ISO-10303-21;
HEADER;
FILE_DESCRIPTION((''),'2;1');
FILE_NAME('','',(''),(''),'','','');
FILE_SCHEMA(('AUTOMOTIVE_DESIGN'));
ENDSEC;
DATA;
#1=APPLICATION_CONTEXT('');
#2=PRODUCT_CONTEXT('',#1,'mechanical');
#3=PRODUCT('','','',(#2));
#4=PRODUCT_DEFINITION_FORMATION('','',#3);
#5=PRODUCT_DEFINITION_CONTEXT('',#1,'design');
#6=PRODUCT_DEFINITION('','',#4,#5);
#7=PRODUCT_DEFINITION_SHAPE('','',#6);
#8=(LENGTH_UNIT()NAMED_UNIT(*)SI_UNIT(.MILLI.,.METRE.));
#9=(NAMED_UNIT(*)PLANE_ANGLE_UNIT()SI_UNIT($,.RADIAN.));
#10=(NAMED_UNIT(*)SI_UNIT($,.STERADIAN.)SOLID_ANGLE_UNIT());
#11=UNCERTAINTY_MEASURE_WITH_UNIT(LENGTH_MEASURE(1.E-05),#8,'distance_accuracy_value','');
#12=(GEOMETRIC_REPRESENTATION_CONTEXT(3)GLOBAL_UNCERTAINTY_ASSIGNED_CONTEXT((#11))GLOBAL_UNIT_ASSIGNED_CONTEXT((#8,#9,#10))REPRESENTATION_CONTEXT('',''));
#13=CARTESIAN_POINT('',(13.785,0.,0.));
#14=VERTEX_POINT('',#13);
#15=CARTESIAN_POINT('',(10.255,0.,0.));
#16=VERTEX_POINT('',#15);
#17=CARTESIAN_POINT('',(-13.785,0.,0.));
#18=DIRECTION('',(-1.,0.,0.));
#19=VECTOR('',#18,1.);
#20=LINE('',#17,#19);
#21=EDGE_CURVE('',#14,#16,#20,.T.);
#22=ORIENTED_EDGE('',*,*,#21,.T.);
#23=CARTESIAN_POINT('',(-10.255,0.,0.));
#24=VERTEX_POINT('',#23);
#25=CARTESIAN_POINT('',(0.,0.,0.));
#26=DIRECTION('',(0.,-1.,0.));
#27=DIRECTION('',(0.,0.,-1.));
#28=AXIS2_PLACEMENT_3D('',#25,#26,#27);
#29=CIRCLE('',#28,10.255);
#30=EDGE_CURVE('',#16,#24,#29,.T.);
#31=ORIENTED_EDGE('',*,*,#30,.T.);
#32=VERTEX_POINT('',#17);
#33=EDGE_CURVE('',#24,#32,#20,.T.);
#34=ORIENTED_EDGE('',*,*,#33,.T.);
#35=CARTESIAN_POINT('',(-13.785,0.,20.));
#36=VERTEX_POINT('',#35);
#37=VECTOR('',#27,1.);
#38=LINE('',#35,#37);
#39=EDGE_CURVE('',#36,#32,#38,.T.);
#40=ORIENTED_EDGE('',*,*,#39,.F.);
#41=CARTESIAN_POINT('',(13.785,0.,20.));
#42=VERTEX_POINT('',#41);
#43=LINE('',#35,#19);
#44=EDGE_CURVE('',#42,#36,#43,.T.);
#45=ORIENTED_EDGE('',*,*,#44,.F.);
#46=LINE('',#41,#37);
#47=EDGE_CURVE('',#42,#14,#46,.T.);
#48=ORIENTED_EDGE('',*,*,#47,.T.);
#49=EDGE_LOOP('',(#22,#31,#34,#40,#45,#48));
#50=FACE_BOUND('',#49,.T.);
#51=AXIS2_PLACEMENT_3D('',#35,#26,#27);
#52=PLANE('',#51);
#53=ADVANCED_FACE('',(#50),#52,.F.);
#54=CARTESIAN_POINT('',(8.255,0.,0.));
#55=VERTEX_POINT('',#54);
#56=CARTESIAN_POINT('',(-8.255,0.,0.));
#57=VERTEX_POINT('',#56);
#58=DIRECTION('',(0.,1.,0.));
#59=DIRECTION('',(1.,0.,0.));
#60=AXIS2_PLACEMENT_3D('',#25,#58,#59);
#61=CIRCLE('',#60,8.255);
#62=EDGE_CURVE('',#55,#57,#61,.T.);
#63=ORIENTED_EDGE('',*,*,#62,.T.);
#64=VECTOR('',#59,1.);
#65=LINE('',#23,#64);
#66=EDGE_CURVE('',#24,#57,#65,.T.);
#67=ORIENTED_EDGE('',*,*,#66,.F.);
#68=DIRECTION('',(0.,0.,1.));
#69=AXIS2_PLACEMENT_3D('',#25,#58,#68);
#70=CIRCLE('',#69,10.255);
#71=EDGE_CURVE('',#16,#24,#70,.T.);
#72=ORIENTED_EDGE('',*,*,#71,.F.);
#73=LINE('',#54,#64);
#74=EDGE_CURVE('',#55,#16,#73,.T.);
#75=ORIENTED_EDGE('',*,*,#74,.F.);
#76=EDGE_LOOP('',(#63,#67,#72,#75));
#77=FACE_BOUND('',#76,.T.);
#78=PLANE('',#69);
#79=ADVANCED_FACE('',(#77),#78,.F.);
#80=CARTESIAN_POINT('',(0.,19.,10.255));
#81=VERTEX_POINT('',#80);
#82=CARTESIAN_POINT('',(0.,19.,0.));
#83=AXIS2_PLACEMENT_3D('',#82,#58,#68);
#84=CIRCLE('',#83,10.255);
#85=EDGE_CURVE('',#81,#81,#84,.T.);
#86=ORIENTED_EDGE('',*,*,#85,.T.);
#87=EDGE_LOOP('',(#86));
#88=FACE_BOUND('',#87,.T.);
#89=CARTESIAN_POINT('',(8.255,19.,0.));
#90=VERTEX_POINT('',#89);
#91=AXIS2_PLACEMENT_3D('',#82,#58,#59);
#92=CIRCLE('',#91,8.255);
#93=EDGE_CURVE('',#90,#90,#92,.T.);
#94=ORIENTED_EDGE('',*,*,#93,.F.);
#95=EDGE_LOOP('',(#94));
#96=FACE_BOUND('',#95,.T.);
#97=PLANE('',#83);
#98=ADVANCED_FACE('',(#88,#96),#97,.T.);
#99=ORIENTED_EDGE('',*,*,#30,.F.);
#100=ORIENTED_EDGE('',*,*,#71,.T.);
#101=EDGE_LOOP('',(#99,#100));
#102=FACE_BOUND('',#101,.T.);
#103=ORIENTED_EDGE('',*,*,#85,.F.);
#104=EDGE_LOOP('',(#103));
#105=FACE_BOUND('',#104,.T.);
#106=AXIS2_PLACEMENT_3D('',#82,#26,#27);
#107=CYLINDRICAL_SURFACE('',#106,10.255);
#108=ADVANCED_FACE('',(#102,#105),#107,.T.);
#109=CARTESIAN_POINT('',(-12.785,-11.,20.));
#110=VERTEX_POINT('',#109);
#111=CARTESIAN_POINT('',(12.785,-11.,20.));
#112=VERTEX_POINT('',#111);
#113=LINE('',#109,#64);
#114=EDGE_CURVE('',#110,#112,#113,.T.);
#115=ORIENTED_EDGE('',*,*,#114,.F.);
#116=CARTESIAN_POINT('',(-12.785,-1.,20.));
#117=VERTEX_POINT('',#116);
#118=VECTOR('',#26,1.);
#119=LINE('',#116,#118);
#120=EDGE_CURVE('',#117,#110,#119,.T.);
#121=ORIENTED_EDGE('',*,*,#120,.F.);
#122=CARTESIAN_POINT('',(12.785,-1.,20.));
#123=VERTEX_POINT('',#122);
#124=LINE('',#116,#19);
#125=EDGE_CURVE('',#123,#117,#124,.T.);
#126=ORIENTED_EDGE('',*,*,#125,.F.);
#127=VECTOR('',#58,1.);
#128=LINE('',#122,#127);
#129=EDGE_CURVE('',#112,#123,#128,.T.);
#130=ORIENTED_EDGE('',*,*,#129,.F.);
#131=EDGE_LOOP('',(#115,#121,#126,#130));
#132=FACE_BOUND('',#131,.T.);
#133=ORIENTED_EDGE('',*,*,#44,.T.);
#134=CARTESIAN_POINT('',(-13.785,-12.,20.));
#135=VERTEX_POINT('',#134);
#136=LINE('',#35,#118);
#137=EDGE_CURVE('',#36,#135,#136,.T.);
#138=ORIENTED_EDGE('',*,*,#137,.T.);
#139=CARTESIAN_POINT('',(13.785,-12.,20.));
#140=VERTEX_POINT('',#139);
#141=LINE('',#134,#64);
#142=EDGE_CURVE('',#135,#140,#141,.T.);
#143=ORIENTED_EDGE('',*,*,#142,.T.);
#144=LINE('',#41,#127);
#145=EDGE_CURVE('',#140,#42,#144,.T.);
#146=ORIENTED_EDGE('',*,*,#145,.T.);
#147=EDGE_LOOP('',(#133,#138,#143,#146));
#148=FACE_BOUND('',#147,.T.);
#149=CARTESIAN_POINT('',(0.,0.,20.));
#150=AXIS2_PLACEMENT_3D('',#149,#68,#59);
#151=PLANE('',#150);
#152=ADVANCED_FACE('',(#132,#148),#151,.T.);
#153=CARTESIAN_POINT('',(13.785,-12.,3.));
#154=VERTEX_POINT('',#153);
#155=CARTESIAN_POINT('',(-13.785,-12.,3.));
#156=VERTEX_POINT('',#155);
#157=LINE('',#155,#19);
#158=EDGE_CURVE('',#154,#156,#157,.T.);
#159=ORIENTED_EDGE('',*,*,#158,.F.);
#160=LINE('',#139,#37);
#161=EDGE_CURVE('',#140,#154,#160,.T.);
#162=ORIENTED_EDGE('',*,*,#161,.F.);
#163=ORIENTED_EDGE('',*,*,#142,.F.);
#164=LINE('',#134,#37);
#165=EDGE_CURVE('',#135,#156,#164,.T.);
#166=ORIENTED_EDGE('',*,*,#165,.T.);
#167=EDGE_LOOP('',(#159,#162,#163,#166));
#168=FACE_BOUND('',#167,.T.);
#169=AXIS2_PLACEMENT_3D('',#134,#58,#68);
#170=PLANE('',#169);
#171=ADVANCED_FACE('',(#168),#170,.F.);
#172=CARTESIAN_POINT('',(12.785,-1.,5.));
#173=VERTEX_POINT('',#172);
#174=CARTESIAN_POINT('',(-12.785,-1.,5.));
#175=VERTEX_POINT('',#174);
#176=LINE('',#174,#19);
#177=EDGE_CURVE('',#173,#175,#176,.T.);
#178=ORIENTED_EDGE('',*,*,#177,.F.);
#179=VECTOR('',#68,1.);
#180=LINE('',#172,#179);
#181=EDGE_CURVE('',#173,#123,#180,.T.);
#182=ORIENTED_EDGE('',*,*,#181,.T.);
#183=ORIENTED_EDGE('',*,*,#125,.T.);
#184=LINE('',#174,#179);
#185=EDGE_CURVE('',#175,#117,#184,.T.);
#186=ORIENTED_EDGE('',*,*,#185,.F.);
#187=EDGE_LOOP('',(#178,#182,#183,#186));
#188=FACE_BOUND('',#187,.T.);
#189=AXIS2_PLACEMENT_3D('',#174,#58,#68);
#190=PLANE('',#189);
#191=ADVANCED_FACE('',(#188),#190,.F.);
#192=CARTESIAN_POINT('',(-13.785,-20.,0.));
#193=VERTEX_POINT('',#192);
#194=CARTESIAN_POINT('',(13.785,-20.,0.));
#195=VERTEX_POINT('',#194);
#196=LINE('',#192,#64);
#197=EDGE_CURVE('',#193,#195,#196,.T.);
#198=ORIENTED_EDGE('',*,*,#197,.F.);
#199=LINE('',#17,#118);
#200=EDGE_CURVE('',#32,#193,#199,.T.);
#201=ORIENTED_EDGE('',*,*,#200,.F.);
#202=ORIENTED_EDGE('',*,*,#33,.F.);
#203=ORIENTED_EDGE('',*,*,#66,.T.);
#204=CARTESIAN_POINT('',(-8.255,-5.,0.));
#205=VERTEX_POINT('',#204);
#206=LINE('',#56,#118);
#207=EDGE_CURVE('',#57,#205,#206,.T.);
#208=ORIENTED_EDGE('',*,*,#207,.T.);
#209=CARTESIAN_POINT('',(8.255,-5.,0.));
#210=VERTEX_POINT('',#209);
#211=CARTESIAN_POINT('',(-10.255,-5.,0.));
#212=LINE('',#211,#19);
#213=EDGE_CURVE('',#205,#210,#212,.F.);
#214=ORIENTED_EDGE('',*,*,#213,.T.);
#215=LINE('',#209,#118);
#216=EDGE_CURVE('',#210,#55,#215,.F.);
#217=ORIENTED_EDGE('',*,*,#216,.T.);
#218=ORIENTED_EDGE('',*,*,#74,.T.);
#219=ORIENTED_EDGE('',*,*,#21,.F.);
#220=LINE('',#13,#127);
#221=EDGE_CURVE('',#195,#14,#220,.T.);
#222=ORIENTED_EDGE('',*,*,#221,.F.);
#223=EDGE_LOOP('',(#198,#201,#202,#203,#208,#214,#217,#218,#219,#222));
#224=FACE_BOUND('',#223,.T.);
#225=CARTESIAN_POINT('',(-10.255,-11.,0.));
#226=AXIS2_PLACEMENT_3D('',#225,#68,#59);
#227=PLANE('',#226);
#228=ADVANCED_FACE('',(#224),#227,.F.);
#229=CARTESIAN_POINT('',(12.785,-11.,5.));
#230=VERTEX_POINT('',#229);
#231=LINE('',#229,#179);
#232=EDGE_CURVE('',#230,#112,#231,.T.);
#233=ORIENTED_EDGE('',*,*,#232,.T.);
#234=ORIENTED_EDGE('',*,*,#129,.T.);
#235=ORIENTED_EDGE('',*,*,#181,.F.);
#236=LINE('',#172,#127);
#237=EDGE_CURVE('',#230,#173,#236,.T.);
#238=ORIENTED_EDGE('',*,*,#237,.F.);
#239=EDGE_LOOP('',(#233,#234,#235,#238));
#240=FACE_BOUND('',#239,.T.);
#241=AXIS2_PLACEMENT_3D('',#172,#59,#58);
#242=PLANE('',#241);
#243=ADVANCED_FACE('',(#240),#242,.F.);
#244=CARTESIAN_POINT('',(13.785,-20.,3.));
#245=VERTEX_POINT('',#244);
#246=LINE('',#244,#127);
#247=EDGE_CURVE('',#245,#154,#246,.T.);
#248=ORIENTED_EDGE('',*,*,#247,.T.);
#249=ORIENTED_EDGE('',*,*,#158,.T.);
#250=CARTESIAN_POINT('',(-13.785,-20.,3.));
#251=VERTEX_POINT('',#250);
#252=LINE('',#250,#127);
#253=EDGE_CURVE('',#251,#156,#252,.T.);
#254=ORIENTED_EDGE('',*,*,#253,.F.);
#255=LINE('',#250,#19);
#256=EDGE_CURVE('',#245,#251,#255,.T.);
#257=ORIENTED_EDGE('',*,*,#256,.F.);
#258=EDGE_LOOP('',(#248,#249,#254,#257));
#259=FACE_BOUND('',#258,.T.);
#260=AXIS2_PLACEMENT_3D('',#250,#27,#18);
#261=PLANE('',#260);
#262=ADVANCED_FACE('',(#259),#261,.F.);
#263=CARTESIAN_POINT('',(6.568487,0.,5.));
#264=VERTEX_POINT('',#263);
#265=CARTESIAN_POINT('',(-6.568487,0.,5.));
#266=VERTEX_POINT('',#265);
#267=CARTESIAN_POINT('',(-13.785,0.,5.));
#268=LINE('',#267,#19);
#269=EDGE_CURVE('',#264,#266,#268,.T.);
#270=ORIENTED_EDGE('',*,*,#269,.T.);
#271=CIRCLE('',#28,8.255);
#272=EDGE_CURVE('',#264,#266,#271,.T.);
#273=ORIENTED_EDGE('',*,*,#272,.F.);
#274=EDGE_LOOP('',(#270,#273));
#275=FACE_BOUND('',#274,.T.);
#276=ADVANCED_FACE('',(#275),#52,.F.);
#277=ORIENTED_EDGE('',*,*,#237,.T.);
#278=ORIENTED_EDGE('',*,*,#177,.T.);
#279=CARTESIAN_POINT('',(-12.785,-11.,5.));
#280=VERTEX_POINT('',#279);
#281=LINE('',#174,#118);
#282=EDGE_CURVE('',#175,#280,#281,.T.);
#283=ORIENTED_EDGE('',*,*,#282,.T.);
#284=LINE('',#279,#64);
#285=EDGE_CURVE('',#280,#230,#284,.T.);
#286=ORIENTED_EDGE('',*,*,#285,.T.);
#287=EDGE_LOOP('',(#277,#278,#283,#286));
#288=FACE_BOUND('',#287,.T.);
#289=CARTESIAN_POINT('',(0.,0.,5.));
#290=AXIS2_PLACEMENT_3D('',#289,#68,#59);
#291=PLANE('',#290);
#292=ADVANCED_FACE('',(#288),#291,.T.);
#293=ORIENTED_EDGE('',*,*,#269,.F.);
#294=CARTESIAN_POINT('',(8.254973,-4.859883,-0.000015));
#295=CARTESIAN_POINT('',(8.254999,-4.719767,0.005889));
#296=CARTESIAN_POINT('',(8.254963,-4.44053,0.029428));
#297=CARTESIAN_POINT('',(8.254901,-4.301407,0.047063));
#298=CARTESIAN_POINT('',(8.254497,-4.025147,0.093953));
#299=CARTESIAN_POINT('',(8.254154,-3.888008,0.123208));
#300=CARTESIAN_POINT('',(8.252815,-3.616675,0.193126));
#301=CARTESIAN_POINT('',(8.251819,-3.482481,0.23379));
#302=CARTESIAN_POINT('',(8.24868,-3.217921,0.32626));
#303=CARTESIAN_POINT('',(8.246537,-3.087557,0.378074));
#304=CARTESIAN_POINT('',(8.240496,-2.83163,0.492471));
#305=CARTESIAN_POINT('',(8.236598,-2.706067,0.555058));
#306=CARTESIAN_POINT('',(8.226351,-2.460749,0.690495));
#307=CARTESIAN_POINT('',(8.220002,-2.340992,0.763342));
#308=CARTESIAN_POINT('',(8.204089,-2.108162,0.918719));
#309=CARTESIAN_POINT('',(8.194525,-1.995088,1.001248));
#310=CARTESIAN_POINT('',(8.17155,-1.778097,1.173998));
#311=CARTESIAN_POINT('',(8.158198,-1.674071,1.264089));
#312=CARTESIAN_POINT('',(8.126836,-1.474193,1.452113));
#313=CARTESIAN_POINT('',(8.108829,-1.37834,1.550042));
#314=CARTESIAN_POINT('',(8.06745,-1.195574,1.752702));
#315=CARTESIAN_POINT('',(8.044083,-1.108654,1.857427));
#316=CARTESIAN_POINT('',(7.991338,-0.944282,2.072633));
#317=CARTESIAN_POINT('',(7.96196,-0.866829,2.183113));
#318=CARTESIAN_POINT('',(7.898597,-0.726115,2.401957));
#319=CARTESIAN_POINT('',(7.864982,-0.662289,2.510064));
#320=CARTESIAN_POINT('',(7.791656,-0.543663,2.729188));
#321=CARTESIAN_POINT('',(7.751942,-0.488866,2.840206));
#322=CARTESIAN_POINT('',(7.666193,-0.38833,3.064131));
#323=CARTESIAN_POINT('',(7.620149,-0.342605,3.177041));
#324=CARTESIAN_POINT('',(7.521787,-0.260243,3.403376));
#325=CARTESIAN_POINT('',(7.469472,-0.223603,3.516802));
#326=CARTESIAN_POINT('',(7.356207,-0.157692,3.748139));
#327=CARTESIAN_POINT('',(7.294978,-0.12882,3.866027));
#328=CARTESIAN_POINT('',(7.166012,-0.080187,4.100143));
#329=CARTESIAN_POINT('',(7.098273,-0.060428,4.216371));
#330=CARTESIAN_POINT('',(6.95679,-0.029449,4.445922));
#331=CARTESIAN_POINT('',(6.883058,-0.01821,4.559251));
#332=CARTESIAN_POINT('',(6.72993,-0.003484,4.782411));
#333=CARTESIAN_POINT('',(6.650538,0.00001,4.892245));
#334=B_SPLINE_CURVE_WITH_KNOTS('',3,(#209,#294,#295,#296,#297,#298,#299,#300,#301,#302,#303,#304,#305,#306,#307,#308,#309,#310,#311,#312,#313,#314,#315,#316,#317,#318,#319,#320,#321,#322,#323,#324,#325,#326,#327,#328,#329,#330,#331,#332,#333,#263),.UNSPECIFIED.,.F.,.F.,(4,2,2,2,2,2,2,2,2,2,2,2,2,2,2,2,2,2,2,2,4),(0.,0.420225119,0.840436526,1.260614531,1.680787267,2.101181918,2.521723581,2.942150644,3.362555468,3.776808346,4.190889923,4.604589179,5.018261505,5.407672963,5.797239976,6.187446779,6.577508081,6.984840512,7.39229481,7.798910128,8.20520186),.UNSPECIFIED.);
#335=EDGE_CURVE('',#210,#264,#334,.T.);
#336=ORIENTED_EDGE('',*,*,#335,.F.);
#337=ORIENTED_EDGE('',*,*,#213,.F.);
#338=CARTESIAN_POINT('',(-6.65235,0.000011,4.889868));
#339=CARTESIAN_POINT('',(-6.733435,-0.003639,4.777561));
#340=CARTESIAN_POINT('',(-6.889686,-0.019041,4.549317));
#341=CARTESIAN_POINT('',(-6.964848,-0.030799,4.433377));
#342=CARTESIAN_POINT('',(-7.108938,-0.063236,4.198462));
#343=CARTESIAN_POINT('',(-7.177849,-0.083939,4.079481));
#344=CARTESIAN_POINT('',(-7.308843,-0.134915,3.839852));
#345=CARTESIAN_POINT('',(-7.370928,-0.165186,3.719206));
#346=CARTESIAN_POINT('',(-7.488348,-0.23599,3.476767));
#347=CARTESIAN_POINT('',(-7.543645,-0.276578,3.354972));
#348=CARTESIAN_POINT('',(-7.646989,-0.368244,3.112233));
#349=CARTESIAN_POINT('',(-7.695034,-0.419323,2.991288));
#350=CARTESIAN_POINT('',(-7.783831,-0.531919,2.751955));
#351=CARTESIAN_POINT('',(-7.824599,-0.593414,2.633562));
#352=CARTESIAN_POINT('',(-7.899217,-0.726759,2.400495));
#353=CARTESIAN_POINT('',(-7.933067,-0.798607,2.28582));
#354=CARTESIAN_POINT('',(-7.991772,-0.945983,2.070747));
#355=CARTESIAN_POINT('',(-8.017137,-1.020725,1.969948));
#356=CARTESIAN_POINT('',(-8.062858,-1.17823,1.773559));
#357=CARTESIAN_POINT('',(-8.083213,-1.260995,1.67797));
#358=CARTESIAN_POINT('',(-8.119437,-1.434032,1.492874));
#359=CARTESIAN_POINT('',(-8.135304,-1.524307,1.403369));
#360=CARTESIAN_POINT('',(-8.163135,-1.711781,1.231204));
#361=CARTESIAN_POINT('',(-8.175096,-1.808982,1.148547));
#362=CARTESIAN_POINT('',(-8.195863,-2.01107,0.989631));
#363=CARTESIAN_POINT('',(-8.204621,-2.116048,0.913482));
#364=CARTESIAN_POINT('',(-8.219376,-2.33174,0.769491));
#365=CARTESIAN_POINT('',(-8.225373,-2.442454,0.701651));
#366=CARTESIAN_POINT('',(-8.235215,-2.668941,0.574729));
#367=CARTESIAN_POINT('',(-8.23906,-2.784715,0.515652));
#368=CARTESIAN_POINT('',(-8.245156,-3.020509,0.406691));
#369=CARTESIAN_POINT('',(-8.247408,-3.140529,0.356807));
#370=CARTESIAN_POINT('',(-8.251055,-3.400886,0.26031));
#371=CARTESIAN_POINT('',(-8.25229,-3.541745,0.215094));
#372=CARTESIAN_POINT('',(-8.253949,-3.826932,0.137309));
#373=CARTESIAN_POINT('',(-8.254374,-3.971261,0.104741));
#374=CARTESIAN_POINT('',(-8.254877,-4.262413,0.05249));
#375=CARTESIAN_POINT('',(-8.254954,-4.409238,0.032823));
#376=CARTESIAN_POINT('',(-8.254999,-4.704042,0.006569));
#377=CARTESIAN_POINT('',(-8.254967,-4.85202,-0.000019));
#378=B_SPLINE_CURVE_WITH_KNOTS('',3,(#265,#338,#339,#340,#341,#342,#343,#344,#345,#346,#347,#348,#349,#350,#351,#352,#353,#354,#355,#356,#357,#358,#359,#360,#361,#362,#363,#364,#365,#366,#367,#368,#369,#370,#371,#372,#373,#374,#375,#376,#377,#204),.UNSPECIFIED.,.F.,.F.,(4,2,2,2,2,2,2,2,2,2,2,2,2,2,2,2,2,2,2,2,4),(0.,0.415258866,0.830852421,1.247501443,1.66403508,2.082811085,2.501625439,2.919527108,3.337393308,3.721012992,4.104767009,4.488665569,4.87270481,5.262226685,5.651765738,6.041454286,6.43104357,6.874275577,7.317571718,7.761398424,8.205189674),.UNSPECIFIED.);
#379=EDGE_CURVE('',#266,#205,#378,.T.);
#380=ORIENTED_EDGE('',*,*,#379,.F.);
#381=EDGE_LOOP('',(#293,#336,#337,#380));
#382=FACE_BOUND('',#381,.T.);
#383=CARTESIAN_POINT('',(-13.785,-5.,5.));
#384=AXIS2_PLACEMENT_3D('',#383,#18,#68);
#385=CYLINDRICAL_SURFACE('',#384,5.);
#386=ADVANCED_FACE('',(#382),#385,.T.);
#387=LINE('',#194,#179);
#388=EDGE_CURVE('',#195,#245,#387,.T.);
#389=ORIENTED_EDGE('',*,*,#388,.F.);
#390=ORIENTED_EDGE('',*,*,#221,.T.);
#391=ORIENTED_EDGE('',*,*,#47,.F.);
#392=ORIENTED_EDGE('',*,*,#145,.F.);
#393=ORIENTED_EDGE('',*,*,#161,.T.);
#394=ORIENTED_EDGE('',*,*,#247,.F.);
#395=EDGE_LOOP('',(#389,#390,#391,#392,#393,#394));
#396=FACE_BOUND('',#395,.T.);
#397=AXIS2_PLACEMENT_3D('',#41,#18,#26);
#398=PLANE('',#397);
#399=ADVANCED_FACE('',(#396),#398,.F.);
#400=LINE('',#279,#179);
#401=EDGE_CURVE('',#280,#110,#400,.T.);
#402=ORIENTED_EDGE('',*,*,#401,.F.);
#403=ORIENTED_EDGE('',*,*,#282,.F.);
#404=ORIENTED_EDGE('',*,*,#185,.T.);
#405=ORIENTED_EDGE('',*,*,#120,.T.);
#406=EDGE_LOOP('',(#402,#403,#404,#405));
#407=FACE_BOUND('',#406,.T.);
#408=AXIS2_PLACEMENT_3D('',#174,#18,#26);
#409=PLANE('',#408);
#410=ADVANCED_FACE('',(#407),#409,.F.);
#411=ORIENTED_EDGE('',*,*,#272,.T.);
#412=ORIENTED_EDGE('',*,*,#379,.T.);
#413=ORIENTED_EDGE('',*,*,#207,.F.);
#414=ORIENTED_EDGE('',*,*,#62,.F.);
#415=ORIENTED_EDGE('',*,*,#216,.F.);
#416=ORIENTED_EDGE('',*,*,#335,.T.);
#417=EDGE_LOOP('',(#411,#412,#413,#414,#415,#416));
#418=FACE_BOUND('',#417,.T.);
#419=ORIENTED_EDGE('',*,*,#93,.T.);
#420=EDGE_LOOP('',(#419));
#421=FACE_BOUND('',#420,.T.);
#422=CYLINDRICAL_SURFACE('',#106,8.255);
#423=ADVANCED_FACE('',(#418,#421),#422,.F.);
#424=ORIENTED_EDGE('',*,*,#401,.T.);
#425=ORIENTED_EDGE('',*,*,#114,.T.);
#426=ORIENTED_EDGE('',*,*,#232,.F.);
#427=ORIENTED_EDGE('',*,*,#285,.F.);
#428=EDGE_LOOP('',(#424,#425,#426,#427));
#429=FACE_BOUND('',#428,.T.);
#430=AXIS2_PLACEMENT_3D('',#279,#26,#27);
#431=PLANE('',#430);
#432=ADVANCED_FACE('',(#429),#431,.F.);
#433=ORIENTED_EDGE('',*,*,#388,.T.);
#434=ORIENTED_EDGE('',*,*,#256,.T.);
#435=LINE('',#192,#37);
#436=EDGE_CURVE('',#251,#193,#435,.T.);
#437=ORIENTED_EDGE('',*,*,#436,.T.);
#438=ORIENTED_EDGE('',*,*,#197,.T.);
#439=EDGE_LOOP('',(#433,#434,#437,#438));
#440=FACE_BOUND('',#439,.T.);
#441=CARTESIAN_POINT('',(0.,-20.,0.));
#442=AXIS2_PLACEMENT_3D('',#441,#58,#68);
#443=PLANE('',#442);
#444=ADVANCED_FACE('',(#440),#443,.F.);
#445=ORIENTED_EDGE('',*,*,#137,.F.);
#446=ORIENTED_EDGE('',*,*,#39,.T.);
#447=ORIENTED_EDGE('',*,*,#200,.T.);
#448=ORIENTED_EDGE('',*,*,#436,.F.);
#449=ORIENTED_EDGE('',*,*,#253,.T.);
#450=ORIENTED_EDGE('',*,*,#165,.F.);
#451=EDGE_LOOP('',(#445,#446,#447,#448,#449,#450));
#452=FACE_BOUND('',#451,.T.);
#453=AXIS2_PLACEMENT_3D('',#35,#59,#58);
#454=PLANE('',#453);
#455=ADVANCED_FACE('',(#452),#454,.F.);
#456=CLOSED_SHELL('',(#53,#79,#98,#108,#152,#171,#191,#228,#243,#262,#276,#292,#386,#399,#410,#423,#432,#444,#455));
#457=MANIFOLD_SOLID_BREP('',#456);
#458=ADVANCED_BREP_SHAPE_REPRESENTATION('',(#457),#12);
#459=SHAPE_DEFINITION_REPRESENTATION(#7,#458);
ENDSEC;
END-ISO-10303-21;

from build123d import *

# Parameters (mm, degrees)
SKETCH_2_R          = 10.255
SKETCH_2_R_2        = 8.255
F_19MM_DEPTH        = 19
EXTRUDE_START       = -11
EXTRUDE_3_DEPTH     = 11
SKETCH_646_W        = 27.57
SKETCH_646_H        = 12
EXTRUDE_698_DEPTH   = 20
SKETCH_6_W          = 25.57
SKETCH_6_H          = 10
CUT_EXTRUDE_1_DEPTH = 15
FILLET_1_R          = 5
SKETCH_10_W         = 27.57
SKETCH_10_H         = 3
EXTRUDE_3_2_DEPTH   = 8


with BuildPart() as part:
    # 草圖2 → 19mm (new body)
    with BuildSketch(Plane(origin=(0, 0, 0), x_dir=(1, 0, 0), z_dir=(0, 1, 0))):
        Circle(SKETCH_2_R)
        Circle(SKETCH_2_R_2, mode=Mode.SUBTRACT)
    extrude(amount=F_19MM_DEPTH)

    # 草圖13 → Extrude 3 (add)
    with BuildSketch(Plane(origin=(0, 0, 0), x_dir=(1, 0, 0), z_dir=(0, 1, 0)).offset(EXTRUDE_START)):
        with BuildLine():
            ThreePointArc((-8.255, 0), (0, -8.255), (8.255, 0))
            Line((8.255, 0), (10.255, 0))
            ThreePointArc((10.255, 0), (0, -10.255), (-10.255, 0))
            Line((-10.255, 0), (-8.255, 0))
        make_face()
    extrude(amount=EXTRUDE_3_DEPTH)

    # Sketch 646 → Extrude 698 (add)
    with BuildSketch(Plane.XY):
        with Locations((0, -6)):
            Rectangle(SKETCH_646_W, SKETCH_646_H)
    extrude(amount=EXTRUDE_698_DEPTH)

    # 草圖6 → 除料-伸長1 (cut)
    with BuildSketch(Plane.XY.offset(20)):
        with Locations((0, -6)):
            Rectangle(SKETCH_6_W, SKETCH_6_H)
    extrude(amount=-CUT_EXTRUDE_1_DEPTH, mode=Mode.SUBTRACT)

    # 圓角1
    # the kernel refuses this fillet: 5 mm, written as the material it takes off along each edge
    with BuildSketch(Plane(origin=(-20.755, 0, 0), x_dir=(0, -1, 0), z_dir=(1, 0, 0))) as fillet_1_piece_1_section:
        with BuildLine():
            CenterArc((FILLET_1_R, -FILLET_1_R), FILLET_1_R, 90, 90)
            Line((0, -FILLET_1_R), (0, 0))
            Line((0, 0), (FILLET_1_R, 0))
        make_face()
    fillet_1_piece_1 = extrude(amount=41.51, mode=Mode.PRIVATE)
    fillet_1_piece_1 = fillet_1_piece_1 & Plane(origin=(0, -1.128045065, 0), x_dir=(1, 0, 0), z_dir=(0, -1, 0)) * Cylinder(8.255, 104, mode=Mode.PRIVATE)
    add(fillet_1_piece_1, mode=Mode.SUBTRACT)

    # 草圖10 → Extrude 3 2 (add)
    with BuildSketch(Plane.XZ.offset(12)):
        with Locations((0, 1.5)):
            Rectangle(SKETCH_10_W, SKETCH_10_H)
    extrude(amount=EXTRUDE_3_2_DEPTH)


solid = part.part
